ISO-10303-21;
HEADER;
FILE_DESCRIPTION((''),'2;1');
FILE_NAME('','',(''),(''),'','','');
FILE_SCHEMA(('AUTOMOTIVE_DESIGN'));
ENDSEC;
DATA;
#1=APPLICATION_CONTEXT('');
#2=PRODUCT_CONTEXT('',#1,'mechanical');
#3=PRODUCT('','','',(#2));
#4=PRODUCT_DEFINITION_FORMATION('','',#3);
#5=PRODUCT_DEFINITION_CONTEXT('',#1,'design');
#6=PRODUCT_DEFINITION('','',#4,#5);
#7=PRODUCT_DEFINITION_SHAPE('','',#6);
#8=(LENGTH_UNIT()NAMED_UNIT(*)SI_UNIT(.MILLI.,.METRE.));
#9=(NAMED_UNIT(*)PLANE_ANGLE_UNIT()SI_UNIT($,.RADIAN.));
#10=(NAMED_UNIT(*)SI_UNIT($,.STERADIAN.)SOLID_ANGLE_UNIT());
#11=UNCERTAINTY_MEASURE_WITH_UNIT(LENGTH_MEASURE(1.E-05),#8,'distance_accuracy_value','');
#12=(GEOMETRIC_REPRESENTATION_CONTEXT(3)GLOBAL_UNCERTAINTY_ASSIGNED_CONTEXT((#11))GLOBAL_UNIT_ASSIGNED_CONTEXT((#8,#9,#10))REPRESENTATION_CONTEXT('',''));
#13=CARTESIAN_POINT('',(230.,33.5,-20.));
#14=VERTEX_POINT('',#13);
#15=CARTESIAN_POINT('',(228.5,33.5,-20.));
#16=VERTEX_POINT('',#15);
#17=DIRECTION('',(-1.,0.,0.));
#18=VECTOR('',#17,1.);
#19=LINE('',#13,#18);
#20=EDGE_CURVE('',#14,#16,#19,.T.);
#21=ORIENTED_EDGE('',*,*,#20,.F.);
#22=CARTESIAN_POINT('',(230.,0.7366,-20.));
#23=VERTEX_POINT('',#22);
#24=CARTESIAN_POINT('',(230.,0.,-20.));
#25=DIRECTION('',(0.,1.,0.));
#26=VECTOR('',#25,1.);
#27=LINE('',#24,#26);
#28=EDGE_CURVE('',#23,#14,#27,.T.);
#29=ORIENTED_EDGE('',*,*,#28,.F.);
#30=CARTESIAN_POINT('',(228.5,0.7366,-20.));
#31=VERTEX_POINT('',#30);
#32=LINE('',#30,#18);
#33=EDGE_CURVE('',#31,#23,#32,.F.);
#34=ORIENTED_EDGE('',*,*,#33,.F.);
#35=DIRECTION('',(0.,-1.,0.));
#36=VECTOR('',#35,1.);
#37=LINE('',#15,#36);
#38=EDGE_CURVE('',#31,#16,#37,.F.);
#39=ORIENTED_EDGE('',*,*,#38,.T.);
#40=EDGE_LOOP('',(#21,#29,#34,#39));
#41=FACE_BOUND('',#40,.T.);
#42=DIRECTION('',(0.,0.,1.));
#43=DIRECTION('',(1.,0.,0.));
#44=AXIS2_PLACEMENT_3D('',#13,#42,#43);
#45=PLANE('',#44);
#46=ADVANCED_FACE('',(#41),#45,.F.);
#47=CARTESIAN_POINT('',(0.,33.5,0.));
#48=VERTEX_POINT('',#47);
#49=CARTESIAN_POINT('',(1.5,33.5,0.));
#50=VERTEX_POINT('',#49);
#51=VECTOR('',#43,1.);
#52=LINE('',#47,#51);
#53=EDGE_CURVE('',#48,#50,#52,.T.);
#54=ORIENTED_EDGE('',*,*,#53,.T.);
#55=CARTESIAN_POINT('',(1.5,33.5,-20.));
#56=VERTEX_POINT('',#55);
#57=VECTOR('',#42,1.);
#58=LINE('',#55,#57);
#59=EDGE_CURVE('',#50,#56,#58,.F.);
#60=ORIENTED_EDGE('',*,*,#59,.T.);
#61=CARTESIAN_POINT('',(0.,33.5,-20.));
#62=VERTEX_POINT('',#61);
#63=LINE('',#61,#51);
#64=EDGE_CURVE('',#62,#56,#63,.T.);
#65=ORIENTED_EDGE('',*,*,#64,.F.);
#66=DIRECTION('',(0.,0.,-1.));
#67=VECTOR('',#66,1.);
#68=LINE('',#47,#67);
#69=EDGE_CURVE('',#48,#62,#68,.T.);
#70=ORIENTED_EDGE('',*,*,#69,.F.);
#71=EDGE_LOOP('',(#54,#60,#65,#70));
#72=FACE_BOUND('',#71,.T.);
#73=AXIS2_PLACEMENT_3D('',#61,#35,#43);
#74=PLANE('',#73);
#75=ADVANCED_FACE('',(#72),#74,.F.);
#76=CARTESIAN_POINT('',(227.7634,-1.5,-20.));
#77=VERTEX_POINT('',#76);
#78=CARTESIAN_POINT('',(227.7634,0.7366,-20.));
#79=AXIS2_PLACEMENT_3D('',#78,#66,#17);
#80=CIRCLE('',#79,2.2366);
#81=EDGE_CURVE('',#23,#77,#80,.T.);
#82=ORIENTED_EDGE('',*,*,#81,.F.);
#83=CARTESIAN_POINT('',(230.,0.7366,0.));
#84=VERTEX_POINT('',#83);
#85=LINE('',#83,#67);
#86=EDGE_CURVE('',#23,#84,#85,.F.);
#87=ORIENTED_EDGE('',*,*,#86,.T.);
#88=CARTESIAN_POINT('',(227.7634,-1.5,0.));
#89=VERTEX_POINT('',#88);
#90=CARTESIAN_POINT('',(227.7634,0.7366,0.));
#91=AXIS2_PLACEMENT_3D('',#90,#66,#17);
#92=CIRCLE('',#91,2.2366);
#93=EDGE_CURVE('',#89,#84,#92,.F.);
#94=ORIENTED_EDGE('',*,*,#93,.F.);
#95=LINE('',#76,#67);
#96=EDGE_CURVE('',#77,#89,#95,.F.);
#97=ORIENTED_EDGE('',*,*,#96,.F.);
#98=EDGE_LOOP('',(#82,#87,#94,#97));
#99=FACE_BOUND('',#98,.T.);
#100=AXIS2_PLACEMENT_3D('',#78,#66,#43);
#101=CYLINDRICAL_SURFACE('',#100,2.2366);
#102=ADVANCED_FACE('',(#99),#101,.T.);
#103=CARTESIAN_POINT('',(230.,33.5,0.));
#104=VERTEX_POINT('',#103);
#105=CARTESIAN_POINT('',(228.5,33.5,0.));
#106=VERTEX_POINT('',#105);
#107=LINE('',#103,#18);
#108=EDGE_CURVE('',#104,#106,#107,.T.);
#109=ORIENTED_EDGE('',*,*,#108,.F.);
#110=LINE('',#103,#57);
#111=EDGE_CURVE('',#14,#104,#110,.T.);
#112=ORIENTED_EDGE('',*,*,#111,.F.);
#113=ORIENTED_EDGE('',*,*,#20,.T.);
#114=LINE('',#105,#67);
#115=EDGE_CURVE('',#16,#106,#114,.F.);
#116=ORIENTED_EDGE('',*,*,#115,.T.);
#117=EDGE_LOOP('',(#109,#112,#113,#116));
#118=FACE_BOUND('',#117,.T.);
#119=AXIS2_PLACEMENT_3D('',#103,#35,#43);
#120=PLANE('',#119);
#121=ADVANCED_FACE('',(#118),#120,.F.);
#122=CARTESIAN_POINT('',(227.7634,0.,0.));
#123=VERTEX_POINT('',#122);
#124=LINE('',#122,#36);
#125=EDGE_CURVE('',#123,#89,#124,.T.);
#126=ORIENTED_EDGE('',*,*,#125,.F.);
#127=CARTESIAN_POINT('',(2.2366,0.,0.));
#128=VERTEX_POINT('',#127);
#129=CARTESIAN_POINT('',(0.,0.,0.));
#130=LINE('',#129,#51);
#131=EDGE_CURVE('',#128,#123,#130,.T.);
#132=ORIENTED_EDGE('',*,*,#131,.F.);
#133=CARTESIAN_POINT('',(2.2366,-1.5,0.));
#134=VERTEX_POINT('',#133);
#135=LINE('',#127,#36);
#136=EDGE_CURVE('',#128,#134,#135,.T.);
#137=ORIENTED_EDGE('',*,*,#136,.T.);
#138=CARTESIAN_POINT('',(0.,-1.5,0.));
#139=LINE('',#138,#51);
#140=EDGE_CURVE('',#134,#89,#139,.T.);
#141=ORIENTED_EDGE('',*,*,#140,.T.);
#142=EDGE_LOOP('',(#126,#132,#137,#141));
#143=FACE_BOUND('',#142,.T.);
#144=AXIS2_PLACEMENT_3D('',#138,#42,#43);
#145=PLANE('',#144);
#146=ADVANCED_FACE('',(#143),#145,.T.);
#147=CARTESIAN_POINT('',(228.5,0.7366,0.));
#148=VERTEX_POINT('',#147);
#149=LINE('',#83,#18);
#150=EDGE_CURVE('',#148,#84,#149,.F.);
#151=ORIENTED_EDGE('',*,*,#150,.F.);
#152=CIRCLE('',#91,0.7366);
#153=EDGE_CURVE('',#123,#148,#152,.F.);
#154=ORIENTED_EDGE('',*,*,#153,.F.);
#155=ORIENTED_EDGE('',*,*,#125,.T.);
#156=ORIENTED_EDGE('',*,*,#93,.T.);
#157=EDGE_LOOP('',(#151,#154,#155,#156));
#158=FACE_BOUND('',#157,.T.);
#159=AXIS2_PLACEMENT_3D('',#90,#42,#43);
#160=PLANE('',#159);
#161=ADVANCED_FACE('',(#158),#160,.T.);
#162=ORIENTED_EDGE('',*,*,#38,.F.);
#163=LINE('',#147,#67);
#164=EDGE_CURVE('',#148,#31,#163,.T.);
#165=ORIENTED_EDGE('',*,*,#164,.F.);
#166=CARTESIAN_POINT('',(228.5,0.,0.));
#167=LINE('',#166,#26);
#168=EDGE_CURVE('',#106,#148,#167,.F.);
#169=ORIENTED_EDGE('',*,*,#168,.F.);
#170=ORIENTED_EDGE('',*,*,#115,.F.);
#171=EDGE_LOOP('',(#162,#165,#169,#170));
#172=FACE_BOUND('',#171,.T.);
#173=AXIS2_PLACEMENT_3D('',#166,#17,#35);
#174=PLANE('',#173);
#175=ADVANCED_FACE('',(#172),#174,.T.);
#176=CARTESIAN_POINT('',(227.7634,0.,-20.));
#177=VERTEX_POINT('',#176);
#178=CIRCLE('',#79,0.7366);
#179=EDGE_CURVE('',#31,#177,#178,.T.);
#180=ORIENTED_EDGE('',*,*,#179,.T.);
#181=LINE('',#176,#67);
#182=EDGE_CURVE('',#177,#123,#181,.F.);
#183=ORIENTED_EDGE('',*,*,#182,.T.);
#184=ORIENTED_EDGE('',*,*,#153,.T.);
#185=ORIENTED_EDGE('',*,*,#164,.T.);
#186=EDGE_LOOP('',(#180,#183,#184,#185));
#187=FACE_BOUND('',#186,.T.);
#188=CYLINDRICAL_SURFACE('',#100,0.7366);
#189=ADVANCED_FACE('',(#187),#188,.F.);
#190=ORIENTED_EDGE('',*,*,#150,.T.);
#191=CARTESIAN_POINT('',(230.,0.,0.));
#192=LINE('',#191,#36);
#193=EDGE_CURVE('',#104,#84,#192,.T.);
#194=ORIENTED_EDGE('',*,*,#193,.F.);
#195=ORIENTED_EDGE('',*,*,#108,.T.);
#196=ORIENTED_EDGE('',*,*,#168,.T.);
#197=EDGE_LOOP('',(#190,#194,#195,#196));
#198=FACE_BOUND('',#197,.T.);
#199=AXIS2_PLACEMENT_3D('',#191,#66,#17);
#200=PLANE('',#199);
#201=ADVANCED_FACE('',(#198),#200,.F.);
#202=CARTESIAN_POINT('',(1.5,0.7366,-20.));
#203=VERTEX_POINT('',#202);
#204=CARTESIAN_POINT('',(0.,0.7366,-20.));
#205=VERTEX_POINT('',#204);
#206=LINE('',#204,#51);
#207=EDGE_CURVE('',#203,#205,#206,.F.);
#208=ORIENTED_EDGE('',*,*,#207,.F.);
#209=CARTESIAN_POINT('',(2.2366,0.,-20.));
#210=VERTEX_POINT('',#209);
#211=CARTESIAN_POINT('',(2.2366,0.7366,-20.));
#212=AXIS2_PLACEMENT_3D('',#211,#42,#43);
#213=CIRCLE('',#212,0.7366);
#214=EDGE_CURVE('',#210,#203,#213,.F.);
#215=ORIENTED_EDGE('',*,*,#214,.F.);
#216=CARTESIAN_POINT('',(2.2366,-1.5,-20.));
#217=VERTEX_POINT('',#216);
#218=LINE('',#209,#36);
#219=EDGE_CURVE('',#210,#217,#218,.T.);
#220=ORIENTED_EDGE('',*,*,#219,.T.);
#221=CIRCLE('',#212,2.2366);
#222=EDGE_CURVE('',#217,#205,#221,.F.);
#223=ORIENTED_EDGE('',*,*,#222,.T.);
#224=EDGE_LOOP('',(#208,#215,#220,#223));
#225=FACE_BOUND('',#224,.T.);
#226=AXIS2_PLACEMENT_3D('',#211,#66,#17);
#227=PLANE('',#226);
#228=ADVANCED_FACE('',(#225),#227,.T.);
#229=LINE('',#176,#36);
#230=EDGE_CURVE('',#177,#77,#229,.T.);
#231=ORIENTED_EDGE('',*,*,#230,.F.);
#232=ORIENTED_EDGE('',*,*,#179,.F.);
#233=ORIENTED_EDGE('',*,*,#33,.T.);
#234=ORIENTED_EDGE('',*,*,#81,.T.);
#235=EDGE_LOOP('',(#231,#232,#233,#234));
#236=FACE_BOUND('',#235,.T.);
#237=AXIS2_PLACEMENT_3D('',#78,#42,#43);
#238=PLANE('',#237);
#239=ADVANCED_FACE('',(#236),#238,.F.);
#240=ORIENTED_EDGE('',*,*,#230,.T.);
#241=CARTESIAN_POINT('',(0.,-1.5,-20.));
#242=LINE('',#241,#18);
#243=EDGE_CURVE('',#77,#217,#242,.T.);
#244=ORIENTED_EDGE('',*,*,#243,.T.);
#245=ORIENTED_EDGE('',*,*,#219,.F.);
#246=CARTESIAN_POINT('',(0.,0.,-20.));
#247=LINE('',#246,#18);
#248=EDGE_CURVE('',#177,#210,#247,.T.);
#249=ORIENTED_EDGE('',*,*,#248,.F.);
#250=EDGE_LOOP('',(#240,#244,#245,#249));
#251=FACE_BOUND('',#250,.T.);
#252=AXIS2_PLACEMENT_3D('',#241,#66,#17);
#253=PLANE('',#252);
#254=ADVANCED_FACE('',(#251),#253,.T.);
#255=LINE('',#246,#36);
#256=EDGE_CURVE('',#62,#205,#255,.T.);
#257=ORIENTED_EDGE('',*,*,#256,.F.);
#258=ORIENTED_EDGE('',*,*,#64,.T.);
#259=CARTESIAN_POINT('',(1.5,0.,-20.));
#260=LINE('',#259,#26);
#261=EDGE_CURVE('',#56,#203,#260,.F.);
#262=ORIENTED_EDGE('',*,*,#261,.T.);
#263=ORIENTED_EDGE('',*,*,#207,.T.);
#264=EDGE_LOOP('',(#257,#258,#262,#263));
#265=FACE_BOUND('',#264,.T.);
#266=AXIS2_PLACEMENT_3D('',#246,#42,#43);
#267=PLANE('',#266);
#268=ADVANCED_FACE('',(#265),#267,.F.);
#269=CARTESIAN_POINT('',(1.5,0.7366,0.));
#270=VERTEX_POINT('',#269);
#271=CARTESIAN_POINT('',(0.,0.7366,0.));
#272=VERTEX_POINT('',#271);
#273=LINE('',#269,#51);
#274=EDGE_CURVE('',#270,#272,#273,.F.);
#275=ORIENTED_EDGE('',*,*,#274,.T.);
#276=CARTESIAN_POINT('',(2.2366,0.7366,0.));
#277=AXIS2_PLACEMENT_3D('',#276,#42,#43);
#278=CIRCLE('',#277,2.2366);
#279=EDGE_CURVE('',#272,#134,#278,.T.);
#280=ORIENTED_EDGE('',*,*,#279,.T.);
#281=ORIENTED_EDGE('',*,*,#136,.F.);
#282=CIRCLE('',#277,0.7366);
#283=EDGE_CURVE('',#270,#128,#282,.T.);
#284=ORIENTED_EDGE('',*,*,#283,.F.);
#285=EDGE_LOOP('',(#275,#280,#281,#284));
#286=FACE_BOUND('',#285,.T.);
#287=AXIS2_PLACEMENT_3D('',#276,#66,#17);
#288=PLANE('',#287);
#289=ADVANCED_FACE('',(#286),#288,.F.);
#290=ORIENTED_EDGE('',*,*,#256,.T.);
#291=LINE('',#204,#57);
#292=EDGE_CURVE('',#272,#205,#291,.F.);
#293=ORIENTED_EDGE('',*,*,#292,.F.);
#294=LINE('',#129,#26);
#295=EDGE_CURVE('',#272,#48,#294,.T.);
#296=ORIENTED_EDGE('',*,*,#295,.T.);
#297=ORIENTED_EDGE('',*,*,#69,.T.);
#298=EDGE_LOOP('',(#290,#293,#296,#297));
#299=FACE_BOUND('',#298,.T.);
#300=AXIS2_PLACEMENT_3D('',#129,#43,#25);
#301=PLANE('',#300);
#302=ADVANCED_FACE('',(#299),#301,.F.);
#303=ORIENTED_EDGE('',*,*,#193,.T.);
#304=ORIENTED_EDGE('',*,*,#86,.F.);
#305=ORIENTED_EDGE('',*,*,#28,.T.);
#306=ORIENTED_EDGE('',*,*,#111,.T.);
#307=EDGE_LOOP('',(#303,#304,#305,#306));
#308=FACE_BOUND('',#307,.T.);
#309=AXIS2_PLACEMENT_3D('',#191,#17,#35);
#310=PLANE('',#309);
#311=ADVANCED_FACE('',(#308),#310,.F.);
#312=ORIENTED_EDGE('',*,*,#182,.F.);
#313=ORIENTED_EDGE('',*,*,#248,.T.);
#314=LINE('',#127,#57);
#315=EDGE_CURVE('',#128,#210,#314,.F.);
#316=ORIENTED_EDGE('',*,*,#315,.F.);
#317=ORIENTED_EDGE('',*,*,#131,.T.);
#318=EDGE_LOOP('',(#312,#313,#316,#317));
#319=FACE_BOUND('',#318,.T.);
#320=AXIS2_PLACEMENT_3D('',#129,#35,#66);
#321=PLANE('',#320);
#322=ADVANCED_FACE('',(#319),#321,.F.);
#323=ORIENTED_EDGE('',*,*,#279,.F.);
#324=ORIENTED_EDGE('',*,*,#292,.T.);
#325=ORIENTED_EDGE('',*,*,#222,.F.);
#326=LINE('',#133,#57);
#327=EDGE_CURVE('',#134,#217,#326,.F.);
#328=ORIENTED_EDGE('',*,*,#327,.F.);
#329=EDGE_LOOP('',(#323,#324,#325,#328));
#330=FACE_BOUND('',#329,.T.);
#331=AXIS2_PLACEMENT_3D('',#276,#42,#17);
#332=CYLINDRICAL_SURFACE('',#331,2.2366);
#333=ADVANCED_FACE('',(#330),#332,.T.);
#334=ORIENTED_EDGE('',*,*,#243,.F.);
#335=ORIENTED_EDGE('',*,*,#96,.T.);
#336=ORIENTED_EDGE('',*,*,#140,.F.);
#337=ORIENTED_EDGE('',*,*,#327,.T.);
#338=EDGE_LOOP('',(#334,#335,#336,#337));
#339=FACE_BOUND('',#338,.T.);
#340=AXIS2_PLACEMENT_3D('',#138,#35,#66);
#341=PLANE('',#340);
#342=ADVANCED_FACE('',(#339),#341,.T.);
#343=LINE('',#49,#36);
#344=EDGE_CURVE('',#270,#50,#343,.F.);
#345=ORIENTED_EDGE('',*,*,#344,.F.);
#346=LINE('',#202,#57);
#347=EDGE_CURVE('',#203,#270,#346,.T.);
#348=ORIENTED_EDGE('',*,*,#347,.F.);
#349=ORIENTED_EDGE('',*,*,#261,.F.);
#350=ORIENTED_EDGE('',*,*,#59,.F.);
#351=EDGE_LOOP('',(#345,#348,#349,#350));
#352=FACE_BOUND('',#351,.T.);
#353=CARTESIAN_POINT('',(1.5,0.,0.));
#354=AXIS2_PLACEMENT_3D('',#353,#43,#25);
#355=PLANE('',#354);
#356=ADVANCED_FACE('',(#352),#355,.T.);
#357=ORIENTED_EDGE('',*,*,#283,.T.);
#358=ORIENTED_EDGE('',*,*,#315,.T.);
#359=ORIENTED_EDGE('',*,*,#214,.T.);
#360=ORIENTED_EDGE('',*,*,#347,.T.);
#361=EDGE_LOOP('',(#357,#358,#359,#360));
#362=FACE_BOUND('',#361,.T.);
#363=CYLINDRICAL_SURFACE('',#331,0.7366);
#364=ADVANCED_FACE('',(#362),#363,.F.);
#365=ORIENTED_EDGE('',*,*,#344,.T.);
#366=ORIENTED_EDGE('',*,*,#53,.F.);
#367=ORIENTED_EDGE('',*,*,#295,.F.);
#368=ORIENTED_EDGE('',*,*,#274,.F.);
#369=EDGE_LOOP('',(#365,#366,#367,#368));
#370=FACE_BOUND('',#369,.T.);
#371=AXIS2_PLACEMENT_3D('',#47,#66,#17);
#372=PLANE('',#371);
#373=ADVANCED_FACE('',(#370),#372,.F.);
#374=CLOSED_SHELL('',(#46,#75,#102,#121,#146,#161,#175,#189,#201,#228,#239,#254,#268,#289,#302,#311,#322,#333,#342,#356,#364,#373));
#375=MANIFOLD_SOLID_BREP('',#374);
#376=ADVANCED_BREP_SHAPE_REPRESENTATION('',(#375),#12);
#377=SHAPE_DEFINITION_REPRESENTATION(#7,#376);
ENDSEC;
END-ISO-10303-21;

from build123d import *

# Parameters (mm, degrees)
SKETCH_1_W                       = 230
SKETCH_1_H                       = 20
SM_BASE_FLANGE_1_DEPTH           = 1.5
SM_EDGE_FLANGE_1_STRIP_W         = 7.4732
SM_EDGE_FLANGE_1_STRIP_H         = 1.5
SM_EDGE_FLANGE_1_STRIP_CUT_DEPTH = 20
SM_EDGE_FLANGE_1_DEPTH           = 20
SM_EDGE_FLANGE_2_STRIP_W         = 7.4732
SM_EDGE_FLANGE_2_STRIP_H         = 1.5
SM_EDGE_FLANGE_2_STRIP_CUT_DEPTH = 20
SM_EDGE_FLANGE_2_DEPTH           = 20


# Sheet-metal steps are written as plain solids
with BuildPart() as part:
    # Sketch 1 → Базовая кромка1 (new body)
    with BuildSketch(Plane(origin=(0, 0, 0), x_dir=(1, 0, 0), z_dir=(0, 1, 0))):
        with Locations((115, 10)):
            Rectangle(SKETCH_1_W, SKETCH_1_H)
    extrude(amount=-SM_BASE_FLANGE_1_DEPTH)

    # Ребро-кромка1 strip (across the edge) → Ребро-кромка1 strip cut (cut)
    with BuildSketch(Plane.XY.offset(-20)):
        with Locations((-1.5, -0.75)):
            Rectangle(SM_EDGE_FLANGE_1_STRIP_W, SM_EDGE_FLANGE_1_STRIP_H)
    extrude(amount=SM_EDGE_FLANGE_1_STRIP_CUT_DEPTH, mode=Mode.SUBTRACT)

    # Ребро-кромка1 section (across the edge) → Ребро-кромка1 (add)
    with BuildSketch(Plane.XY.offset(-20)):
        with BuildLine():
            Line((0, 0.7366), (0, 33.5))
            Line((0, 33.5), (1.5, 33.5))
            Line((1.5, 33.5), (1.5, 0.7366))
            ThreePointArc((1.5, 0.7366), (1.715745145, 0.215745145), (2.2366, 0))
            Line((2.2366, 0), (2.2366, -1.5))
            ThreePointArc((2.2366, -1.5), (0.655084973, -0.844915027), (0, 0.7366))
        make_face()
    extrude(amount=SM_EDGE_FLANGE_1_DEPTH)

    # Ребро-кромка2 strip (across the edge) → Ребро-кромка2 strip cut (cut)
    with BuildSketch(Plane(origin=(230, 0, 0), x_dir=(-1, 0, 0), z_dir=(0, 0, -1))):
        with Locations((-1.5, -0.75)):
            Rectangle(SM_EDGE_FLANGE_2_STRIP_W, SM_EDGE_FLANGE_2_STRIP_H)
    extrude(amount=SM_EDGE_FLANGE_2_STRIP_CUT_DEPTH, mode=Mode.SUBTRACT)

    # Ребро-кромка2 section (across the edge) → Ребро-кромка2 (add)
    with BuildSketch(Plane(origin=(230, 0, 0), x_dir=(-1, 0, 0), z_dir=(0, 0, -1))):
        with BuildLine():
            Line((0, 0.7366), (0, 33.5))
            Line((0, 33.5), (1.5, 33.5))
            Line((1.5, 33.5), (1.5, 0.7366))
            ThreePointArc((1.5, 0.7366), (1.715745145, 0.215745145), (2.2366, 0))
            Line((2.2366, 0), (2.2366, -1.5))
            ThreePointArc((2.2366, -1.5), (0.655084973, -0.844915027), (0, 0.7366))
        make_face()
    extrude(amount=SM_EDGE_FLANGE_2_DEPTH)


solid = part.part
